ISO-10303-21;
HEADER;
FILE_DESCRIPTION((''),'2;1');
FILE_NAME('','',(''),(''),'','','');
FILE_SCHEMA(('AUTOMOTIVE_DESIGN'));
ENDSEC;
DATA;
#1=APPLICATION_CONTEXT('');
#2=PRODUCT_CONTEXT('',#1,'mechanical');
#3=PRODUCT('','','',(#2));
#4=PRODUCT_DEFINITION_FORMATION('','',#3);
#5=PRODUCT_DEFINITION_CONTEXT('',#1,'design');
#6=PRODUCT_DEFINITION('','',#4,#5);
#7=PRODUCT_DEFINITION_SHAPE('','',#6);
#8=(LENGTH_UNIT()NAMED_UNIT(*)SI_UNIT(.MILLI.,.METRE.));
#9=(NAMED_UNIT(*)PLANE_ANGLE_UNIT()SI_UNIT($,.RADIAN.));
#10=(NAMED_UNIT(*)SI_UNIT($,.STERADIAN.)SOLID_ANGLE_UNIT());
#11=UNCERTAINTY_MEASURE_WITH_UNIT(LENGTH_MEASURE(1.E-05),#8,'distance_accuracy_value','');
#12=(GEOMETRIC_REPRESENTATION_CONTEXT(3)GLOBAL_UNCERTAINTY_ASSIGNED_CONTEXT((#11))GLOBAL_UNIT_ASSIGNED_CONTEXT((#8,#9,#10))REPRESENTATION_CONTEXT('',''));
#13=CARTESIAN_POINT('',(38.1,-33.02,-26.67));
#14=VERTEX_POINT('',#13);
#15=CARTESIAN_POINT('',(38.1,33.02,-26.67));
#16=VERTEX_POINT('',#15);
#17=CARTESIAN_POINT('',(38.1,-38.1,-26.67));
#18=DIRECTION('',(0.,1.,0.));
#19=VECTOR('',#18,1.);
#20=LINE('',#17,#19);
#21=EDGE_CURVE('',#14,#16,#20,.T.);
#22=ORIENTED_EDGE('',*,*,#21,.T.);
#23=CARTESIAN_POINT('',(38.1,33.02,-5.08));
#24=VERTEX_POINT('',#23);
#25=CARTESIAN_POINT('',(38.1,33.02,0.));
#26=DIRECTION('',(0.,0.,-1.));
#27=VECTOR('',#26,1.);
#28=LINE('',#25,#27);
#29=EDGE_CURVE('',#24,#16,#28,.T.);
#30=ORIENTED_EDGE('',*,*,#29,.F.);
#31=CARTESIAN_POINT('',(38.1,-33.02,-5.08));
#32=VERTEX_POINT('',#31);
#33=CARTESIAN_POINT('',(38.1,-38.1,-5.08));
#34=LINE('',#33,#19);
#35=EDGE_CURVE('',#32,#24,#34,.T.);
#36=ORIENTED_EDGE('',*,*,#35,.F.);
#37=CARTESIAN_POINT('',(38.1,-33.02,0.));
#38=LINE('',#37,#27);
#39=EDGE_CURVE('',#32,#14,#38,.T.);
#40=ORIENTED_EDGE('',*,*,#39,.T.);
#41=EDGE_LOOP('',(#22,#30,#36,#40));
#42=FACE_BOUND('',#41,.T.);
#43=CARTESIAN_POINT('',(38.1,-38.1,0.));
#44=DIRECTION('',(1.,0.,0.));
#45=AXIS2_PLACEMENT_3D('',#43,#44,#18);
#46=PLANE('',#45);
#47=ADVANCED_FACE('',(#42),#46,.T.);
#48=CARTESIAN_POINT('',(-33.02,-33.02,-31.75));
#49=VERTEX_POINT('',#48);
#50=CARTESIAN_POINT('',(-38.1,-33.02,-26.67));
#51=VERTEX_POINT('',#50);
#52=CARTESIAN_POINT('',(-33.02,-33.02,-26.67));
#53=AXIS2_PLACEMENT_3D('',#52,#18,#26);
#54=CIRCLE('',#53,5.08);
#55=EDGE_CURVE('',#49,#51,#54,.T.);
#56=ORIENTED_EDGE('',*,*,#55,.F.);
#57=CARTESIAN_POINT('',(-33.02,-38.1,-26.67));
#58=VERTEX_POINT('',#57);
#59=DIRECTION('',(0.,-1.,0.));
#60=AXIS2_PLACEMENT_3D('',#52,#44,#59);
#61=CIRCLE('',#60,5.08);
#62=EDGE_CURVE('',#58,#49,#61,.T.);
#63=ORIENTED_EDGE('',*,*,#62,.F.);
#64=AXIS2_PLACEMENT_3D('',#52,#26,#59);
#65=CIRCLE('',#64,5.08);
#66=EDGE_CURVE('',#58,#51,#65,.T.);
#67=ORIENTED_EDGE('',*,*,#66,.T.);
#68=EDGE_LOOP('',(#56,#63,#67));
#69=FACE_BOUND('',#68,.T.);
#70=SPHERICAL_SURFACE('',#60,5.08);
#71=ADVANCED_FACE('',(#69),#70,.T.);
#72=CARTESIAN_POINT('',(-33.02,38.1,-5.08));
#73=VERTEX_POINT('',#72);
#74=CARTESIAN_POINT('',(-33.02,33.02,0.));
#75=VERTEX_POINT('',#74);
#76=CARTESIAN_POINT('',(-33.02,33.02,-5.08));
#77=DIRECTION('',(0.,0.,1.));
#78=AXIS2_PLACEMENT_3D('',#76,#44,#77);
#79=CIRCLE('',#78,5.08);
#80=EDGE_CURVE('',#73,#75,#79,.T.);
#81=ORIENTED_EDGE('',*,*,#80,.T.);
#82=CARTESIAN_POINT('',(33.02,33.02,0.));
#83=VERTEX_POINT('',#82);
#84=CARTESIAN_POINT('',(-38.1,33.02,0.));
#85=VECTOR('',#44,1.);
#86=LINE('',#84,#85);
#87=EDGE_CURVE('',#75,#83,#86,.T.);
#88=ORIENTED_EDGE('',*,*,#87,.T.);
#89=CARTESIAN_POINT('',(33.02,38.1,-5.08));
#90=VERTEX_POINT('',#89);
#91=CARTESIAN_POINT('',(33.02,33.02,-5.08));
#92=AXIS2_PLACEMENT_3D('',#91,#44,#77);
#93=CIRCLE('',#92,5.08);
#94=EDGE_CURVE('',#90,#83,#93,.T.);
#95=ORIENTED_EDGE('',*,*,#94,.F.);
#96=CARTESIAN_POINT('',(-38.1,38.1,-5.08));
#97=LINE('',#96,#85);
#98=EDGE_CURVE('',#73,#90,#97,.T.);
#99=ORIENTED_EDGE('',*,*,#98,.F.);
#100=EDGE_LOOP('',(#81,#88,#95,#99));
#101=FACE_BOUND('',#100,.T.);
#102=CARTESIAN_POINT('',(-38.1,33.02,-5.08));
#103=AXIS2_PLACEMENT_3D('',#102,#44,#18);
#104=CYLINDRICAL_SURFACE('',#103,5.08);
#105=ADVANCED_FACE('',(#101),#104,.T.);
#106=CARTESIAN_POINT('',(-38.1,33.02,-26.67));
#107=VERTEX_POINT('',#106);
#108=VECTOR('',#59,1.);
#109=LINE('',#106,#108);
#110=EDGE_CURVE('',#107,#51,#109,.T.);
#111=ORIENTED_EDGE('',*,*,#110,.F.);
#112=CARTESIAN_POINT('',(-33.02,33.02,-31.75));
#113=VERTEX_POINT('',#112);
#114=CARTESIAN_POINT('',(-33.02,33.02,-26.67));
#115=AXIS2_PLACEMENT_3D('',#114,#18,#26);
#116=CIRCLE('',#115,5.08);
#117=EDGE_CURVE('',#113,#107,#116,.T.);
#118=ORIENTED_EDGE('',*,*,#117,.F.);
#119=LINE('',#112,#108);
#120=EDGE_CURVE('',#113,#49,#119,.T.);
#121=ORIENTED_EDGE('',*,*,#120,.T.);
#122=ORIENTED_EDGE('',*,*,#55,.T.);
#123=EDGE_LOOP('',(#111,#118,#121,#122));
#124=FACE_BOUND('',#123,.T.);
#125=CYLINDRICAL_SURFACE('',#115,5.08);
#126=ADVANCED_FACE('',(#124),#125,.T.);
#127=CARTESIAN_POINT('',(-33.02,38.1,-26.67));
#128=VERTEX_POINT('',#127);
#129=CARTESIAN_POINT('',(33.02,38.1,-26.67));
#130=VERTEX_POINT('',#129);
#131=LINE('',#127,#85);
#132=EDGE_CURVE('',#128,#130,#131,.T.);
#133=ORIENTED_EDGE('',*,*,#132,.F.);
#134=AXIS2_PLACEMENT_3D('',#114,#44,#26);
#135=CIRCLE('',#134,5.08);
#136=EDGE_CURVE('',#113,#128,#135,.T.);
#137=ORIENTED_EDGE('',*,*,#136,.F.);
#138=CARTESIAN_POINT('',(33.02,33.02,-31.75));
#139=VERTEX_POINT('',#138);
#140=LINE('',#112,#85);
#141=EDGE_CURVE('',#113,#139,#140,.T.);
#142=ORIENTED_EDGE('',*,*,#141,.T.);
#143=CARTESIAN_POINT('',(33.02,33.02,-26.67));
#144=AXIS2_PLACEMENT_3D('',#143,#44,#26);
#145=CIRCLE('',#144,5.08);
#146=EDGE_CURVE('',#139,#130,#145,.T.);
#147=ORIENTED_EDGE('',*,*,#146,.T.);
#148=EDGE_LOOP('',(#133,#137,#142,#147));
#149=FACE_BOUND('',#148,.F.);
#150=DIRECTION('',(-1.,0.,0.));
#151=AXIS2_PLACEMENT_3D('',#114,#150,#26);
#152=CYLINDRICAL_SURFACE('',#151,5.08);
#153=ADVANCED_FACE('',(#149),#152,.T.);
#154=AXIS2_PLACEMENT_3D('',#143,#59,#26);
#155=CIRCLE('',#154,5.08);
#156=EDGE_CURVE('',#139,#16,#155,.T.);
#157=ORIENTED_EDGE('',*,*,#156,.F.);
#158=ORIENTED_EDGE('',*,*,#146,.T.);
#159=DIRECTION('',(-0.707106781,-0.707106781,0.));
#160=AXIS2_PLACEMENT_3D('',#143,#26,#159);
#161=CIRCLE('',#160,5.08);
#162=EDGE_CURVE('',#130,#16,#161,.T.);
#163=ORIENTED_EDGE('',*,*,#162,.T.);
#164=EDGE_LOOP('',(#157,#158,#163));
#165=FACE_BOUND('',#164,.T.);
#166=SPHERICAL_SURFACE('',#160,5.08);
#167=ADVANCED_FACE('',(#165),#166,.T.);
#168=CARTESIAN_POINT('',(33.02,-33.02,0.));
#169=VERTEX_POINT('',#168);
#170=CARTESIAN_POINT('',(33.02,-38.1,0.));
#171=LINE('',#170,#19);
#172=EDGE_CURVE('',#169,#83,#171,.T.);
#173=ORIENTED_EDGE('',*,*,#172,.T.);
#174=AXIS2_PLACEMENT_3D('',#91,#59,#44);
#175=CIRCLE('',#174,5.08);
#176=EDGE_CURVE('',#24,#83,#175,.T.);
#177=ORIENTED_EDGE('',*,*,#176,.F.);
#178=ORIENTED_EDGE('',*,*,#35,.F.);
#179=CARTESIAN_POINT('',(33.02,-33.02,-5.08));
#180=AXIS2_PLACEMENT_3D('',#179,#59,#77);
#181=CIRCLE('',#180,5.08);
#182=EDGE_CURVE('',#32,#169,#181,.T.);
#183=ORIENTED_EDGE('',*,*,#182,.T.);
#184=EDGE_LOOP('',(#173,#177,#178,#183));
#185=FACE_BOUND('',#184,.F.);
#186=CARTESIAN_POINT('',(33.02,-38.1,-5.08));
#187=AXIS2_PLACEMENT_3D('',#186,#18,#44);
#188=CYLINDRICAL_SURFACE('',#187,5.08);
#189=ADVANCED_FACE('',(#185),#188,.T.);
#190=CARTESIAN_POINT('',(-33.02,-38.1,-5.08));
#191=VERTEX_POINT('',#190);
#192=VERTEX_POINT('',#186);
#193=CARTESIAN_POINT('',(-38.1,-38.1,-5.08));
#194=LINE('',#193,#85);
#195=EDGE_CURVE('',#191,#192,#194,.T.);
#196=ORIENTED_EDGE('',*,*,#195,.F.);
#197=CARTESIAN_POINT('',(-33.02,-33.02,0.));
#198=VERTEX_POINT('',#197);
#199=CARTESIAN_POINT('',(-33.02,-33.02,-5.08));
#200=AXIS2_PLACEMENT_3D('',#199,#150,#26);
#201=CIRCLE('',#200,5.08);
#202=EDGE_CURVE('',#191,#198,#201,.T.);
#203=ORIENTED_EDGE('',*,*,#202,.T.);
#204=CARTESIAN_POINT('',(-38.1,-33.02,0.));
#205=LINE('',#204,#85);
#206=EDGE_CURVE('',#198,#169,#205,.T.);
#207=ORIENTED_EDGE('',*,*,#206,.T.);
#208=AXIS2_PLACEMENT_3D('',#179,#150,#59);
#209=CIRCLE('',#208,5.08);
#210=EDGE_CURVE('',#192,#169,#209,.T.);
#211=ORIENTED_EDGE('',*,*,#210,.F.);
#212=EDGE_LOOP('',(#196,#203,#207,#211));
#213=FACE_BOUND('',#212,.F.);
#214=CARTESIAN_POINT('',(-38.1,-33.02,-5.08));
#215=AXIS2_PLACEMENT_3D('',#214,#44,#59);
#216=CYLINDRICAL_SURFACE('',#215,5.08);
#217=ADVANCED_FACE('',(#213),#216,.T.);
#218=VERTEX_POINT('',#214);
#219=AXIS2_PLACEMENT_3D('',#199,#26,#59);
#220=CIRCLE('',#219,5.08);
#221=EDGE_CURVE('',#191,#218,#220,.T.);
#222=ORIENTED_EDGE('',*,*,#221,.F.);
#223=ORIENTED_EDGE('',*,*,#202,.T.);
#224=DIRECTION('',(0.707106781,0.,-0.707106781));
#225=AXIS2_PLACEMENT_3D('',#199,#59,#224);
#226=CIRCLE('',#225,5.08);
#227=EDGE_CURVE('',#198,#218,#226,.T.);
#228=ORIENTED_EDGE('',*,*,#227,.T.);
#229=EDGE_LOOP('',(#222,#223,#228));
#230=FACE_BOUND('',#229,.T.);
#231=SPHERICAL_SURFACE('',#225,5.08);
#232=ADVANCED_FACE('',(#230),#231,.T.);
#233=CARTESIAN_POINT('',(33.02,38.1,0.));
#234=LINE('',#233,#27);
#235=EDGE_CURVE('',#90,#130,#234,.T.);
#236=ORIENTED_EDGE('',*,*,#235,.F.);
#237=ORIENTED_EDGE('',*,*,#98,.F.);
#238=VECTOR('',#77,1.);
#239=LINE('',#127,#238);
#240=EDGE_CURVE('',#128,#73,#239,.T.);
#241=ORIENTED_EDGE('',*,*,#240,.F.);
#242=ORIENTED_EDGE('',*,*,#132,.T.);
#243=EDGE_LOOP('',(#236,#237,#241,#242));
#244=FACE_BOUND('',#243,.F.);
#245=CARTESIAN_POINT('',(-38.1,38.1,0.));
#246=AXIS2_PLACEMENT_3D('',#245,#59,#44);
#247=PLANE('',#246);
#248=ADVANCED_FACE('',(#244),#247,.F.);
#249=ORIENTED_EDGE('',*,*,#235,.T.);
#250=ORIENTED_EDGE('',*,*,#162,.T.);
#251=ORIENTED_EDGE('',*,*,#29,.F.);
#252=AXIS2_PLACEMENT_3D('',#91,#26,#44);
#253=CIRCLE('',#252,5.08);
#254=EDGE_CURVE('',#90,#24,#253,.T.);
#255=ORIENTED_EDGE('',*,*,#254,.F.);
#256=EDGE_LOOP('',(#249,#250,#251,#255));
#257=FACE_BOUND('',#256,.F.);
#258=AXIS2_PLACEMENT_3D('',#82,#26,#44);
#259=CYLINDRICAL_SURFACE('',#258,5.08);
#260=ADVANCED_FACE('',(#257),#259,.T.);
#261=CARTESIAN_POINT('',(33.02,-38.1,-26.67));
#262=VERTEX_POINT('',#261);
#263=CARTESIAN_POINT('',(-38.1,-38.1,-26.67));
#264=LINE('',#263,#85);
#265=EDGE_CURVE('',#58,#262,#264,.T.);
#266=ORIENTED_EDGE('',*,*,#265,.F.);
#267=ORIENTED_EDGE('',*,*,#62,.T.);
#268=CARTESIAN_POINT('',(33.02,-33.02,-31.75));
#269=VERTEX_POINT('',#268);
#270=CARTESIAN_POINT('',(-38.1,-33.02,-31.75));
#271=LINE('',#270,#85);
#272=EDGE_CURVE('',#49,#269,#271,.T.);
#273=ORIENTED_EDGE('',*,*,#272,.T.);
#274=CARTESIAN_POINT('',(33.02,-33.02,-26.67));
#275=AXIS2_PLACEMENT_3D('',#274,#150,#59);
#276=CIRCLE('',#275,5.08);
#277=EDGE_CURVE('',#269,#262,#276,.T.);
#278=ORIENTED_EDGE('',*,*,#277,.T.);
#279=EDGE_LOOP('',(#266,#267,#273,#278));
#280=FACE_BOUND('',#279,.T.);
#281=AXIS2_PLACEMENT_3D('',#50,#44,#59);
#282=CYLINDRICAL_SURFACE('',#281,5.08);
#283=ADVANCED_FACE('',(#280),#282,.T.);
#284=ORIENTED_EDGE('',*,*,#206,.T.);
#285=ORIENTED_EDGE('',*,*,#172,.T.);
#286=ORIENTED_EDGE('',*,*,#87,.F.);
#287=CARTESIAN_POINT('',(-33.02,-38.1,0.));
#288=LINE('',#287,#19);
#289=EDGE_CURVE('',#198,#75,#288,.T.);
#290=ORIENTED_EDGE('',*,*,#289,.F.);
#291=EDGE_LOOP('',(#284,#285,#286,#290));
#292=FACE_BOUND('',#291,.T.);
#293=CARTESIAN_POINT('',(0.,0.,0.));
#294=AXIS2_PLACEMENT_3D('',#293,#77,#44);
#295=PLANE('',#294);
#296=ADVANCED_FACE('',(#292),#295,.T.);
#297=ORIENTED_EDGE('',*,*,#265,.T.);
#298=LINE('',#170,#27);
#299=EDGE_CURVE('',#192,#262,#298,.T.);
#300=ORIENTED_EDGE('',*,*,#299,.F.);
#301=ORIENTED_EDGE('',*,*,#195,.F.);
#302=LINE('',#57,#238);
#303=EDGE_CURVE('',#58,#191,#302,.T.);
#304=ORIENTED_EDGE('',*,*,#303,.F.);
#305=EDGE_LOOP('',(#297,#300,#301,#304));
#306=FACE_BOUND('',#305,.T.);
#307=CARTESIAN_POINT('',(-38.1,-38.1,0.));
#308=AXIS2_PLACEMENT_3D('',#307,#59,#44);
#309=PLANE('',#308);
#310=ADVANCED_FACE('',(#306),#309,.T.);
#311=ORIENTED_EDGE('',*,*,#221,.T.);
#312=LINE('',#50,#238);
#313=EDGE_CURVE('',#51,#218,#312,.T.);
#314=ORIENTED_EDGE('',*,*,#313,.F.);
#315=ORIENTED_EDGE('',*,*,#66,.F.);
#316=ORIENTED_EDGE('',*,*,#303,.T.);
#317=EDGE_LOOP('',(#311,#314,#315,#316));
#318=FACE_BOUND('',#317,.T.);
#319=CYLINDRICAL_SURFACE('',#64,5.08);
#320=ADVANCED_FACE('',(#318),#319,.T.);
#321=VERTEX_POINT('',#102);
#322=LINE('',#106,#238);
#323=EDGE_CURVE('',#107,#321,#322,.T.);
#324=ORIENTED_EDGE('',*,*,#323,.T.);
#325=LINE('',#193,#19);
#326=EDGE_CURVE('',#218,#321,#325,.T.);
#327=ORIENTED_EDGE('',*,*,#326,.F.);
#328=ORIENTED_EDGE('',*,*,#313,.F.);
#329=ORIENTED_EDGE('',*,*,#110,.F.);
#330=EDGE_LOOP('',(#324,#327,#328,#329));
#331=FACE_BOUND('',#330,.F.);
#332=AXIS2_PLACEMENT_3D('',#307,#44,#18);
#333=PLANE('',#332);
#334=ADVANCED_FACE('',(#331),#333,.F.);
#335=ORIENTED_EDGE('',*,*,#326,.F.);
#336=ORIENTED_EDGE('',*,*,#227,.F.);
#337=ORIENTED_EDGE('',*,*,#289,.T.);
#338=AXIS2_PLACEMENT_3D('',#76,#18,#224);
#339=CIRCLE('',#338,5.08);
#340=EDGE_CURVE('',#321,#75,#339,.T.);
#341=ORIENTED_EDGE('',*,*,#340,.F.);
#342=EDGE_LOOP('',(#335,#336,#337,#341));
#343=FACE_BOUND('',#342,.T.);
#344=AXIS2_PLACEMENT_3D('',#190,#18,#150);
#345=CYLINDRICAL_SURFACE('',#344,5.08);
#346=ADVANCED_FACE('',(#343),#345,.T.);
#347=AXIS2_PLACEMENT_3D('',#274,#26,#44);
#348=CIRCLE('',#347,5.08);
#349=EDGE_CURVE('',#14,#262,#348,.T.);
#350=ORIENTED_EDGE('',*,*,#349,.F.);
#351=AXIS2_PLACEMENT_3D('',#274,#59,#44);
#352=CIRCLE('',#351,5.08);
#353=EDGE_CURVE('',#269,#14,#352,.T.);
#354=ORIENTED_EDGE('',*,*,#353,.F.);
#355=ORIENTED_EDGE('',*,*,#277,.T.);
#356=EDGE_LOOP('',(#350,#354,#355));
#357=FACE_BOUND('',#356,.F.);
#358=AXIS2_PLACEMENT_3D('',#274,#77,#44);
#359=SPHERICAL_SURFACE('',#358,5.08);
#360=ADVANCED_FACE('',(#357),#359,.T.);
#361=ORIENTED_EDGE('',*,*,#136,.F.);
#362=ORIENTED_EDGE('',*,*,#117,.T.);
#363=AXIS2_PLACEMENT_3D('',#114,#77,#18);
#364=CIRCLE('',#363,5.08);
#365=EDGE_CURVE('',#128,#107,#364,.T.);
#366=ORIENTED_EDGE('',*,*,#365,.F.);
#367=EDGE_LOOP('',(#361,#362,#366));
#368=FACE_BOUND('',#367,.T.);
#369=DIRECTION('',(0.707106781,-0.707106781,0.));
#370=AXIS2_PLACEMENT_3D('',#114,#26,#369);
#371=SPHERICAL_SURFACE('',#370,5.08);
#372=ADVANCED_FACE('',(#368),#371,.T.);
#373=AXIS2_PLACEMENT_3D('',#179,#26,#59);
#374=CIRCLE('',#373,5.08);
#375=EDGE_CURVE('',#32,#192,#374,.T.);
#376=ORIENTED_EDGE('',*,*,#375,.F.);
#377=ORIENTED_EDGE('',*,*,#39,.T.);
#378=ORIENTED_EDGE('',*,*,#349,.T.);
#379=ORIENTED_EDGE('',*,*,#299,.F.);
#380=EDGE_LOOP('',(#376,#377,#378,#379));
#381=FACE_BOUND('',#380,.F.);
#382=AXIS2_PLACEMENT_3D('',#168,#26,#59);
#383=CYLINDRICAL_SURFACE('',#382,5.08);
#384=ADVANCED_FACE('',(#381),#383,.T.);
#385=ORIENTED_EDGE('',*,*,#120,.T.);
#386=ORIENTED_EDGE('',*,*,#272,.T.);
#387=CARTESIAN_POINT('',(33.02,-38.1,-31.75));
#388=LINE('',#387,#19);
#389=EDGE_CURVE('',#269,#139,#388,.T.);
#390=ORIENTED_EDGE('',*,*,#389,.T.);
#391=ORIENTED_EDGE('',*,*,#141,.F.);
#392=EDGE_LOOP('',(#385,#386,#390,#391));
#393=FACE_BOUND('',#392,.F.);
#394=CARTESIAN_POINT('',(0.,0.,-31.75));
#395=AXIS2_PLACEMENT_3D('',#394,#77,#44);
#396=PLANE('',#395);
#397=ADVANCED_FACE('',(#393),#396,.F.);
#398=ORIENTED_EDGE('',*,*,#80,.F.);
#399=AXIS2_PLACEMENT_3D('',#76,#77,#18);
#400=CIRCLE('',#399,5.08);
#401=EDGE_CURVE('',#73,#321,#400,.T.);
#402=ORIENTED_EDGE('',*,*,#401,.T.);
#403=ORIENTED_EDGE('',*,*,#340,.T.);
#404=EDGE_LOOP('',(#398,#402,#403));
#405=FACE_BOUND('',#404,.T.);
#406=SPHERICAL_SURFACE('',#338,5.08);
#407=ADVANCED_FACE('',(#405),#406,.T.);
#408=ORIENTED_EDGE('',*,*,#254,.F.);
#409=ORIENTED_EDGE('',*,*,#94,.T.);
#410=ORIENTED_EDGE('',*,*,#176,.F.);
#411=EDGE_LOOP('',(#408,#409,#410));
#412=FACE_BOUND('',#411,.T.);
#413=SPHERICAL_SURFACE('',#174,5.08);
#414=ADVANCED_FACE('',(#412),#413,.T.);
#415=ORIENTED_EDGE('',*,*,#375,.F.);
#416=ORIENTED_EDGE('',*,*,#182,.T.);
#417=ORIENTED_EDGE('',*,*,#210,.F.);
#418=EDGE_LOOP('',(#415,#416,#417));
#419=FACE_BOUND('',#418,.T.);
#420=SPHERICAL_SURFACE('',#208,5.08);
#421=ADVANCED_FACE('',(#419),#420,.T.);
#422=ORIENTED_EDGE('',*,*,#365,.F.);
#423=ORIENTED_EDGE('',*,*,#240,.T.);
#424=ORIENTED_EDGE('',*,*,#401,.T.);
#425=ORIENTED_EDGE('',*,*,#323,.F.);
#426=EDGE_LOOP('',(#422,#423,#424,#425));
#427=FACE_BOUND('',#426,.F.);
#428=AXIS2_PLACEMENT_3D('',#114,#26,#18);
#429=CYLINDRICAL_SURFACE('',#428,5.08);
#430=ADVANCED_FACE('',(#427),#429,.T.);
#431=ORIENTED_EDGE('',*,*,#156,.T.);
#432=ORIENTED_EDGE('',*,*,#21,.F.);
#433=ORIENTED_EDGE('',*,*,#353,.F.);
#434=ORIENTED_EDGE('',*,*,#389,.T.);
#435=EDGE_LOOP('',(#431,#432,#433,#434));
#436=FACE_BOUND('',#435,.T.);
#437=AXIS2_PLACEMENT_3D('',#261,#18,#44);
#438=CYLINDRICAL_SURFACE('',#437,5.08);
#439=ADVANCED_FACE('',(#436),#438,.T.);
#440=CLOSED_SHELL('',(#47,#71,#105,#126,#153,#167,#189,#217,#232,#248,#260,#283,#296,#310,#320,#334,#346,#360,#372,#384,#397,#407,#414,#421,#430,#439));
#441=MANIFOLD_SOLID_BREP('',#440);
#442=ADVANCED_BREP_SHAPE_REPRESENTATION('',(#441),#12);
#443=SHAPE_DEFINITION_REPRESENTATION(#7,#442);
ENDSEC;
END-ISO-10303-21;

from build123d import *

# Parameters (mm, degrees)
F0_W         = 76.2
F0_H         = 76.2
F1_DEPTH     = 31.75
F2_R         = 5.08
F3_T1_DEPTH  = 66.04
F3_T3_DEPTH  = 21.59
F3_T5_DEPTH  = 66.04
F3_S9_W      = 5.08
F3_S9_H      = 5.08
F3_T10_DEPTH = 5.08
F3_S15_W     = 5.08
F3_S15_H     = 5.08
F3_T16_DEPTH = 5.08
F3_S21_W     = 5.08
F3_S21_H     = 5.08
F3_T22_DEPTH = 5.08
F3_S27_W     = 5.08
F3_S27_H     = 5.08
F3_T28_DEPTH = 5.08
F3_T32_ANGLE = 90


# Not quite as in the source:
# - a fillet or chamfer that OpenCascade refuses, or shapes differently, is made with other operations: its cross-section is extruded or revolved along the edge and cut away or added


with BuildPart() as f1:
    # F0 (on Top) → F1 (new body)
    with BuildSketch(Plane.XY):
        Rectangle(F0_W, F0_H)
    extrude(amount=-F1_DEPTH)

    # F2
    f2_edges = [f1.edges().sort_by_distance(p)[0] for p in [
        (0, -38.1, 0),
        (38.1, -38.1, -15.875),
        (38.1, 0, 0),
        (38.1, 38.1, -15.875),
        (38.1, 0, -31.75),
        (0, -38.1, -31.75),
        (-38.1, 0, 0),
        (0, 38.1, 0),
    ]]
    fillet(f2_edges, radius=F2_R)

    # F3: fillet of radius 5.08 on 5 edges, made by hand

    # F3_s2 → F3_t1 (cut)
    with BuildSketch(Plane.YZ.offset(-33.02)):
        with BuildLine():
            ThreePointArc((33.02, -31.75), (36.6121024484, -30.2621024484), (38.1, -26.67))
            Line((38.1, -26.67), (38.1, -31.75))
            Line((38.1, -31.75), (33.02, -31.75))
        make_face()
    extrude(amount=F3_T1_DEPTH, mode=Mode.SUBTRACT)

    # F3_s4 → F3_t3 (cut)
    with BuildSketch(Plane.XY.offset(-26.67)):
        with BuildLine():
            ThreePointArc((-33.02, 38.1), (-36.6121024484, 36.6121024484), (-38.1, 33.02))
            Line((-38.1, 33.02), (-38.1, 38.1))
            Line((-38.1, 38.1), (-33.02, 38.1))
        make_face()
        with BuildLine():
            ThreePointArc((-33.02, -38.1), (-36.6121024484, -36.6121024484), (-38.1, -33.02))
            Line((-38.1, -33.02), (-38.1, -38.1))
            Line((-38.1, -38.1), (-33.02, -38.1))
        make_face()
    extrude(amount=F3_T3_DEPTH, mode=Mode.SUBTRACT)

    # F3_s6 → F3_t5 (cut)
    with BuildSketch(Plane.XZ.offset(-33.02)):
        with BuildLine():
            ThreePointArc((-33.02, -31.75), (-36.6121024484, -30.2621024484), (-38.1, -26.67))
            Line((-38.1, -26.67), (-38.1, -31.75))
            Line((-38.1, -31.75), (-33.02, -31.75))
        make_face()
    extrude(amount=F3_T5_DEPTH, mode=Mode.SUBTRACT)


with BuildPart() as f3_tool8:
    # F3_s9 → F3_t10 (new body)
    with BuildSketch(Plane.XZ.offset(33.02)):
        with Locations((-35.56, -2.54)):
            Rectangle(F3_S9_W, F3_S9_H)
    extrude(amount=F3_T10_DEPTH)

    # F3_s11 → F3_t12 (revolve, cut)
    with BuildSketch(Plane(origin=(-33.02, -33.02, -5.08), x_dir=(0.7071067812, 0, -0.7071067812), z_dir=(-0.7071067812, 0, -0.7071067812))):
        with BuildLine():
            ThreePointArc((0, -5.08), (5.08, 0), (0, 5.08))
            Line((0, 5.08), (0, -5.08))
        make_face()
    revolve(axis=Axis((-33.02, -33.02, -5.08), (0, -1, 0)), mode=Mode.SUBTRACT)


with BuildPart() as f1_1:
    add(f1.part)

    # F3_t7: cut F3_tool8
    add(f3_tool8.part, mode=Mode.SUBTRACT)


with BuildPart() as f3_tool14:
    # F3_s15 → F3_t16 (new body)
    with BuildSketch(Plane.XZ.offset(-33.02)):
        with Locations((-35.56, -2.54)):
            Rectangle(F3_S15_W, F3_S15_H)
    extrude(amount=-F3_T16_DEPTH)

    # F3_s17 → F3_t18 (revolve, cut)
    with BuildSketch(Plane(origin=(-33.02, 33.02, -5.08), x_dir=(0.7071067812, 0, -0.7071067812), z_dir=(0.7071067812, 0, 0.7071067812))):
        with BuildLine():
            ThreePointArc((0, -5.08), (5.08, 0), (0, 5.08))
            Line((0, 5.08), (0, -5.08))
        make_face()
    revolve(axis=Axis((-33.02, 33.02, -5.08), (0, 1, 0)), mode=Mode.SUBTRACT)


with BuildPart() as f1_2:
    add(f1_1.part)

    # F3_t13: cut F3_tool14
    add(f3_tool14.part, mode=Mode.SUBTRACT)


with BuildPart() as f3_tool20:
    # F3_s21 → F3_t22 (new body)
    with BuildSketch(Plane.XY.offset(-26.67)):
        with Locations((35.56, 35.56)):
            Rectangle(F3_S21_W, F3_S21_H)
    extrude(amount=-F3_T22_DEPTH)

    # F3_s23 → F3_t24 (revolve, cut)
    with BuildSketch(Plane(origin=(33.02, 33.02, -26.67), x_dir=(-0.7071067812, -0.7071067812, 0), z_dir=(0.7071067812, -0.7071067812, 0))):
        with BuildLine():
            ThreePointArc((0, -5.08), (5.08, 0), (0, 5.08))
            Line((0, 5.08), (0, -5.08))
        make_face()
    revolve(axis=Axis((33.02, 33.02, -26.67), (0, 0, -1)), mode=Mode.SUBTRACT)


with BuildPart() as f1_3:
    add(f1_2.part)

    # F3_t19: cut F3_tool20
    add(f3_tool20.part, mode=Mode.SUBTRACT)


with BuildPart() as f3_tool26:
    # F3_s27 → F3_t28 (new body)
    with BuildSketch(Plane.XY.offset(-26.67)):
        with Locations((-35.56, 35.56)):
            Rectangle(F3_S27_W, F3_S27_H)
    extrude(amount=-F3_T28_DEPTH)

    # F3_s29 → F3_t30 (revolve, cut)
    with BuildSketch(Plane(origin=(-33.02, 33.02, -26.67), x_dir=(0.7071067812, -0.7071067812, 0), z_dir=(0.7071067812, 0.7071067812, 0))):
        with BuildLine():
            ThreePointArc((0, -5.08), (5.08, 0), (0, 5.08))
            Line((0, 5.08), (0, -5.08))
        make_face()
    revolve(axis=Axis((-33.02, 33.02, -26.67), (0, 0, -1)), mode=Mode.SUBTRACT)


with BuildPart() as f1_4:
    add(f1_3.part)

    # F3_t25: cut F3_tool26
    add(f3_tool26.part, mode=Mode.SUBTRACT)

    # F3_s31 → F3_t32 (revolve, cut)
    with BuildSketch(Plane.XY.offset(-26.67)):
        with BuildLine():
            ThreePointArc((-38.1, -33.02), (-36.6121024484, -36.6121024484), (-33.02, -38.1))
            Line((-33.02, -38.1), (-38.1, -38.1))
            Line((-38.1, -38.1), (-38.1, -33.02))
        make_face()
    revolve(axis=Axis((-38.1, -33.02, -26.67), (1, 0, 0)), revolution_arc=F3_T32_ANGLE, mode=Mode.SUBTRACT)


solid = f1_4.part
